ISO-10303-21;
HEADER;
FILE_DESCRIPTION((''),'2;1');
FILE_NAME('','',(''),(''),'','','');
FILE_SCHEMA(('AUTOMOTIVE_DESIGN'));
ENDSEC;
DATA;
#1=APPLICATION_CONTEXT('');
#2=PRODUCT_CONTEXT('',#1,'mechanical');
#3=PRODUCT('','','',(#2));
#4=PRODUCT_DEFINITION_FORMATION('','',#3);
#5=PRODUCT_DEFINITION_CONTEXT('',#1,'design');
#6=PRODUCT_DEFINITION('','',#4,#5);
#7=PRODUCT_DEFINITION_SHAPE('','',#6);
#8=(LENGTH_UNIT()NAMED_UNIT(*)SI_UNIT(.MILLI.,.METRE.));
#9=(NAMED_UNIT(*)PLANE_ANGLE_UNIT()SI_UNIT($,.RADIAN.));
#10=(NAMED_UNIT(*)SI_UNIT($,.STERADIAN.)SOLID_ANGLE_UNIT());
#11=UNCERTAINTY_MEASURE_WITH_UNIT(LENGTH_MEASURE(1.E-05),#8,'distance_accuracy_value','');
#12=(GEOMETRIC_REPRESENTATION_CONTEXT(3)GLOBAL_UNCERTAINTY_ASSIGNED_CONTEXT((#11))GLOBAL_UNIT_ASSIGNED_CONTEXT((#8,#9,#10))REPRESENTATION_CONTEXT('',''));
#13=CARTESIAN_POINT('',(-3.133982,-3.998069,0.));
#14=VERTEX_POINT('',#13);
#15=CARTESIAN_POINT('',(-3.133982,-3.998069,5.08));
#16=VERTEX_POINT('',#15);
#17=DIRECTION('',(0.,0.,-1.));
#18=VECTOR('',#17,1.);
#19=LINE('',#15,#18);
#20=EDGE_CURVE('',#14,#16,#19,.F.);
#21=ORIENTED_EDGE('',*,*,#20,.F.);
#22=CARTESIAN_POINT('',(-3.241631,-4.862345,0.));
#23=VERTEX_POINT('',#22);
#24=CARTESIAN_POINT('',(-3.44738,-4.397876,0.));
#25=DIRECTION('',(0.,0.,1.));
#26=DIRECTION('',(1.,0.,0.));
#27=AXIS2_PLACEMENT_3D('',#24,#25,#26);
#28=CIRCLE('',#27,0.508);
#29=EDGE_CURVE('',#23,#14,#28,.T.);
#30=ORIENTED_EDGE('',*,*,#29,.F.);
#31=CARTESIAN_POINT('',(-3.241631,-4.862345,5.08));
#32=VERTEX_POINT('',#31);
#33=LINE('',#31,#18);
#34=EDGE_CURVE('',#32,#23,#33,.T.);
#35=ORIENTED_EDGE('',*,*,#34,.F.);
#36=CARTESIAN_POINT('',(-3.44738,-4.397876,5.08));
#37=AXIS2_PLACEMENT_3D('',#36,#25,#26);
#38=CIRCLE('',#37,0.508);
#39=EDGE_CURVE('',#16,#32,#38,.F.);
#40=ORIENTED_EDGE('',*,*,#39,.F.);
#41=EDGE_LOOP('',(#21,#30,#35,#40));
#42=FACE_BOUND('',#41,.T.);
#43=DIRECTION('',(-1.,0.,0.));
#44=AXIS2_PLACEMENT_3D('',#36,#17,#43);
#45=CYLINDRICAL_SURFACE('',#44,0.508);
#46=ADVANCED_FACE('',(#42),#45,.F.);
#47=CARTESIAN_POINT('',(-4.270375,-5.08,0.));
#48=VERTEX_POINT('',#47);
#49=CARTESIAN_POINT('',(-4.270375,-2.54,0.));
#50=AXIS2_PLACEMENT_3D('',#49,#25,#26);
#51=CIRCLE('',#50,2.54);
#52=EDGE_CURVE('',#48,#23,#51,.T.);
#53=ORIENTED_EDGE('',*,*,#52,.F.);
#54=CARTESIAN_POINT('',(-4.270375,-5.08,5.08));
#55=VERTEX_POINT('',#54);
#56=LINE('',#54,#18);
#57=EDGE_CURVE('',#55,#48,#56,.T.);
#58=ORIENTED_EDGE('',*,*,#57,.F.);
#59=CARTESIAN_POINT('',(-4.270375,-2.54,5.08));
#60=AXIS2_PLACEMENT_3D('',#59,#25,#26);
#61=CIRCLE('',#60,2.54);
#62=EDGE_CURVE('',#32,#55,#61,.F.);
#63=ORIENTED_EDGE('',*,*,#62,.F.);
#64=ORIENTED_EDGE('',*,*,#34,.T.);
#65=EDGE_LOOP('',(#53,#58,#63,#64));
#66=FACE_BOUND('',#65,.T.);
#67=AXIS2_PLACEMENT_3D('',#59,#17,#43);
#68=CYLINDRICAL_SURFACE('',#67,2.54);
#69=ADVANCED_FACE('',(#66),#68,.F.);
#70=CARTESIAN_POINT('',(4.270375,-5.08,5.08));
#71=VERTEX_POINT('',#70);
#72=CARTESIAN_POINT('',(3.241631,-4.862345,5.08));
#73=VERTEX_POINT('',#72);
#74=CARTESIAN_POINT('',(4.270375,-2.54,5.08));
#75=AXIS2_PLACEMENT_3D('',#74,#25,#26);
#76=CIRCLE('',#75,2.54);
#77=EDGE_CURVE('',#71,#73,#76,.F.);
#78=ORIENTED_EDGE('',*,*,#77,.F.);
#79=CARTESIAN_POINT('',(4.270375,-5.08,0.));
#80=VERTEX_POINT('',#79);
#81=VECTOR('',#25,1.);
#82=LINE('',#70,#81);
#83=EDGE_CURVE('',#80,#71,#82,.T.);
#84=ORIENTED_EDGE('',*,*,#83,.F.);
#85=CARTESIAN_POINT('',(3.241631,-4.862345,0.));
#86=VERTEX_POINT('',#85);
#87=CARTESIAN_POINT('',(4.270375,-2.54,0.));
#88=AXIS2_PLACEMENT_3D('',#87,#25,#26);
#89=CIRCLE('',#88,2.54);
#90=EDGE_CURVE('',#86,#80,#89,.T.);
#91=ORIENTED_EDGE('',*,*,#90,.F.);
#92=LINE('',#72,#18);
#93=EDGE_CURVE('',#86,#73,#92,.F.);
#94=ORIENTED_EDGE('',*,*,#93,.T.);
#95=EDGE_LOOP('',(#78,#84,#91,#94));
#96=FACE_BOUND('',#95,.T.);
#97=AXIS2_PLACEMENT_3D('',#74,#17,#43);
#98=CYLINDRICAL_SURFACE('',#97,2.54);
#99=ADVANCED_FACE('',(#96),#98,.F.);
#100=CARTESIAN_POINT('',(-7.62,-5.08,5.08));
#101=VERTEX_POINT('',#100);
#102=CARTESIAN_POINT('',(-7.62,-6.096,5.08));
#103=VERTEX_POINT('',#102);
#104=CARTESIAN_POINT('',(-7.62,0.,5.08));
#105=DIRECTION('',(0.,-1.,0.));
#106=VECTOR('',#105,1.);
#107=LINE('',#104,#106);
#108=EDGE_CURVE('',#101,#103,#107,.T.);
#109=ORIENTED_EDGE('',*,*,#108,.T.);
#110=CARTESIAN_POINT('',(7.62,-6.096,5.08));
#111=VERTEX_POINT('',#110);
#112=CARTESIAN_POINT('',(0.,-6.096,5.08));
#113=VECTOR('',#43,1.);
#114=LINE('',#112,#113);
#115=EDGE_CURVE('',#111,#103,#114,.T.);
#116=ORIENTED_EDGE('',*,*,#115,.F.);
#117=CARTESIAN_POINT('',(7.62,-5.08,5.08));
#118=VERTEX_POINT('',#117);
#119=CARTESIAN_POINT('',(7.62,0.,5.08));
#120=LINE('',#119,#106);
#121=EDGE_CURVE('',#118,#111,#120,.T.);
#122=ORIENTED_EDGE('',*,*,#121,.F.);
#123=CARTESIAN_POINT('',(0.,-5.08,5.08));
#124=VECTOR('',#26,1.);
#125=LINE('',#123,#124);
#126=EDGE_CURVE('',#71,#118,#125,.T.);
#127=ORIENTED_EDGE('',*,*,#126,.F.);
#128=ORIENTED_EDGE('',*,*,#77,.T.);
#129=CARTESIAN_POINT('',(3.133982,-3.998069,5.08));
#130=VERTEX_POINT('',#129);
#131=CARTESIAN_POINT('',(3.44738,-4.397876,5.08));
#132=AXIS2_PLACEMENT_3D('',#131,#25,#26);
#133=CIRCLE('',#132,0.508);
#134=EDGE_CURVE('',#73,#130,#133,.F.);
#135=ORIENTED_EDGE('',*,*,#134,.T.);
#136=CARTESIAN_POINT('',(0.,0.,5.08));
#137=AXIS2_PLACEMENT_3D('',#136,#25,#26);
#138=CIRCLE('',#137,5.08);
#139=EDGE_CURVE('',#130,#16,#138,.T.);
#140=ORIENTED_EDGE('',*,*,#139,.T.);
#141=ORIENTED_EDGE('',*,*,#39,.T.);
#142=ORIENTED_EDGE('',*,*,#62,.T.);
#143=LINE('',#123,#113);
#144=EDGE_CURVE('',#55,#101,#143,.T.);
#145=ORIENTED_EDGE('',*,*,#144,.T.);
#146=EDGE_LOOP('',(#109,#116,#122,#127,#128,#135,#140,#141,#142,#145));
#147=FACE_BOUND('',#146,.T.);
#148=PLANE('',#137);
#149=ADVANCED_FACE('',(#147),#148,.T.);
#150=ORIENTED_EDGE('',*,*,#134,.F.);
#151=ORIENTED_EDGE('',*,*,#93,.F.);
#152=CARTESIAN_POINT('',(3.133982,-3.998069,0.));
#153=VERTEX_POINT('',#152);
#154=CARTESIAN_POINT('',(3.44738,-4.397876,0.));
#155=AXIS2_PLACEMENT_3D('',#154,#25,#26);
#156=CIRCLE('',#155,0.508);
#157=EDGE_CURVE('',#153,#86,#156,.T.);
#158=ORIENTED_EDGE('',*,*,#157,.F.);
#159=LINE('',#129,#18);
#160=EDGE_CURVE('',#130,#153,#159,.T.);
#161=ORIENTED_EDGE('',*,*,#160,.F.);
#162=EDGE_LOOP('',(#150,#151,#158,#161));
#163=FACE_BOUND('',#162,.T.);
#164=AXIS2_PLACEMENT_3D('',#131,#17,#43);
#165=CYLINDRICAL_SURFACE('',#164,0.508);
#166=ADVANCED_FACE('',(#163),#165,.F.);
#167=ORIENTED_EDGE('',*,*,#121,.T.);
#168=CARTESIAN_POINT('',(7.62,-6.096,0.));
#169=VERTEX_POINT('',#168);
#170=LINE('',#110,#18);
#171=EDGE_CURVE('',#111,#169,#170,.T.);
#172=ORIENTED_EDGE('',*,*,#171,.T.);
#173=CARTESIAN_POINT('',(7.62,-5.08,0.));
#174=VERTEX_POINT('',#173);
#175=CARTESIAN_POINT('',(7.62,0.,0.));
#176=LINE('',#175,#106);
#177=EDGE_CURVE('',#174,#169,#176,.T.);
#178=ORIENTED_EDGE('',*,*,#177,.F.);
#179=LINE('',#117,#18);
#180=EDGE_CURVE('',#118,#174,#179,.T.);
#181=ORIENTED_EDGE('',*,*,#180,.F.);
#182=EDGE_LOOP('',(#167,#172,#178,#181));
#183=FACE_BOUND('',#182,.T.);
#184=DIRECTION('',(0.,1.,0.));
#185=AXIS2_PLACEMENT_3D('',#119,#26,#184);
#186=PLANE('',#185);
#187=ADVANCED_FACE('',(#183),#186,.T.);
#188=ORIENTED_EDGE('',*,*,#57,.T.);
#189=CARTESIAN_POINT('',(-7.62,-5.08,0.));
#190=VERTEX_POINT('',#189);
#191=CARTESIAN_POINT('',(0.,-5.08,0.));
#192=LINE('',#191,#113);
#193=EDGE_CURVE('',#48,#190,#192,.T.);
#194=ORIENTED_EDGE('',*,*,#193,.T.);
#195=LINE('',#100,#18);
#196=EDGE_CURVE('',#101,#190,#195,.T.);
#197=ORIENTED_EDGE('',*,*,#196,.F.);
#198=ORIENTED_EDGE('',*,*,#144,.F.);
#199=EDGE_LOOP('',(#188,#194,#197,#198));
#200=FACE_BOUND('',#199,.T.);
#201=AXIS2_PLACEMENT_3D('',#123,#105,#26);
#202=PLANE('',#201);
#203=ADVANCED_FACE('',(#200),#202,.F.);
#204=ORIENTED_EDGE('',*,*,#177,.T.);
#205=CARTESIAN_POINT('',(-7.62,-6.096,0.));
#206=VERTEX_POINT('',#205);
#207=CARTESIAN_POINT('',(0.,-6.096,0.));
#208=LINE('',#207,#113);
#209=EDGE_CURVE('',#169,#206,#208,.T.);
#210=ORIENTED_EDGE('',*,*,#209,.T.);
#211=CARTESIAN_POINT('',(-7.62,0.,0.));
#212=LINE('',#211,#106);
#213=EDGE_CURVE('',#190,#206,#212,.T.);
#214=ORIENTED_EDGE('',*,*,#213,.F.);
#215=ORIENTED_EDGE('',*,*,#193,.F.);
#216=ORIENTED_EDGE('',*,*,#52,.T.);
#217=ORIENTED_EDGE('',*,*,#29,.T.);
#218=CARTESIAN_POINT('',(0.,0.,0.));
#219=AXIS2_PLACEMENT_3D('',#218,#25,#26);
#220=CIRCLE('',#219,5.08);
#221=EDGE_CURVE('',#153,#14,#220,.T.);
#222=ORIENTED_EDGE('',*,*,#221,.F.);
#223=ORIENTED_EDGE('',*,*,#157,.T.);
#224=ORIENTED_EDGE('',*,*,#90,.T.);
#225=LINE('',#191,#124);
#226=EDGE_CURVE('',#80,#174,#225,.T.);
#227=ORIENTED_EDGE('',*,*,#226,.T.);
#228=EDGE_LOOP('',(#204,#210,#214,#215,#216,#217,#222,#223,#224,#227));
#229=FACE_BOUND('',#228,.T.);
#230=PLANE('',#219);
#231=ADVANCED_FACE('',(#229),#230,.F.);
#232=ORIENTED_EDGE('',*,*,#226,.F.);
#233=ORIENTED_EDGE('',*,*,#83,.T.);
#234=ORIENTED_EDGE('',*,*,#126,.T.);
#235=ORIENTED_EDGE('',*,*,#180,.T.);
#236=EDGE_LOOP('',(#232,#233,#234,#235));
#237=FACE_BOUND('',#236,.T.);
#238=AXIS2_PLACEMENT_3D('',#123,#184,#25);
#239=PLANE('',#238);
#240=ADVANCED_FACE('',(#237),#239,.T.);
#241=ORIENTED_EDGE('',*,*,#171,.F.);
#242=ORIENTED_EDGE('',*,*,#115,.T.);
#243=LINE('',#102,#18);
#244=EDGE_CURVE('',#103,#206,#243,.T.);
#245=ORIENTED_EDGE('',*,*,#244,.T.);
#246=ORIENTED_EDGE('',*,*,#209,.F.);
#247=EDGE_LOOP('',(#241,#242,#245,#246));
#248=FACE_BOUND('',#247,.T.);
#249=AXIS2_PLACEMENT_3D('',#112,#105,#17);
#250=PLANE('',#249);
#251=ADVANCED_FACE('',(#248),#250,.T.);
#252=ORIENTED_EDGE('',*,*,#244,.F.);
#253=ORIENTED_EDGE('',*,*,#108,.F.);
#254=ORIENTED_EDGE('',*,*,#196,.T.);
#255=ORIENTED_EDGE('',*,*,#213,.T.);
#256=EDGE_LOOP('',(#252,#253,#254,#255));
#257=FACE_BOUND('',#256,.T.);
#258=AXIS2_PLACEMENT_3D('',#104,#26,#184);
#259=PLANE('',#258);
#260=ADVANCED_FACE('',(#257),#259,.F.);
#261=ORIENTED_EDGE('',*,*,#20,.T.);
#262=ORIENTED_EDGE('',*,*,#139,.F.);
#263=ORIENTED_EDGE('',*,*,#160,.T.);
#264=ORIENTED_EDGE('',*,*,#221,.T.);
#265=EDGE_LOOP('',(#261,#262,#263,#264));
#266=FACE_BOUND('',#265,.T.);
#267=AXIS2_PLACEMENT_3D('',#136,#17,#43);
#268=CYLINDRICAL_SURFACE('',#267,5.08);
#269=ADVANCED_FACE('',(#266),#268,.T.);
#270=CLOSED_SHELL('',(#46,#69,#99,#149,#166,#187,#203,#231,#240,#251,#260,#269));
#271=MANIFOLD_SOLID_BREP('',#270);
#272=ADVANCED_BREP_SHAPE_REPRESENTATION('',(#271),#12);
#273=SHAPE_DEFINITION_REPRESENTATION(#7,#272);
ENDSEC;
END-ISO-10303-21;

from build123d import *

# Parameters (mm, degrees)
SKETCH1_W           = 2.54
SKETCH1_H           = 1.016
SKETCH1_W_2         = 5.08
BOSS_EXTRUDE1_DEPTH = 5.08
FILLET1_R           = 2.54
FILLET2_R           = 0.508


with BuildPart() as part:
    # Sketch1 → Boss-Extrude1 (new body)
    with BuildSketch(Plane.XY):
        with BuildLine():
            Line((-2.54, -4.399409051), (-2.54, -1.651))
            Line((-2.54, -1.651), (2.54, -1.651))
            Line((2.54, -1.651), (2.54, -4.399409051))
            ThreePointArc((2.54, -4.399409051), (4.399409051, -2.54), (5.08, 0))
            ThreePointArc((5.08, 0), (-2.54, 4.399409051), (-2.54, -4.399409051))
        make_face()
        with BuildLine():
            Line((2.54, -1.651), (-2.54, -1.651))
            Line((-2.54, -1.651), (-2.54, -4.399409051))
            ThreePointArc((-2.54, -4.399409051), (-1.314800749, -4.906903198), (0, -5.08))
            ThreePointArc((0, -5.08), (1.314800749, -4.906903198), (2.54, -4.399409051))
            Line((2.54, -4.399409051), (2.54, -1.651))
        make_face()
        with BuildLine():
            Line((-2.54, -4.399409051), (-2.54, -1.651))
            Line((-2.54, -1.651), (2.54, -1.651))
            Line((2.54, -1.651), (2.54, -4.399409051))
            ThreePointArc((2.54, -4.399409051), (4.399409051, -2.54), (5.08, 0))
            ThreePointArc((5.08, 0), (-2.54, 4.399409051), (-2.54, -4.399409051))
        make_face()
        with BuildLine():
            Line((2.54, -1.651), (-2.54, -1.651))
            Line((-2.54, -1.651), (-2.54, -4.399409051))
            ThreePointArc((-2.54, -4.399409051), (-1.314800749, -4.906903198), (0, -5.08))
            ThreePointArc((0, -5.08), (1.314800749, -4.906903198), (2.54, -4.399409051))
            Line((2.54, -4.399409051), (2.54, -1.651))
        make_face()
        with BuildLine():
            ThreePointArc((0, -5.08), (-1.314800749, -4.906903198), (-2.54, -4.399409051))
            Line((-2.54, -4.399409051), (-2.54, -5.08))
            Line((-2.54, -5.08), (0, -5.08))
        make_face()
        with BuildLine():
            Line((2.54, -5.08), (2.54, -4.399409051))
            ThreePointArc((2.54, -4.399409051), (1.314800749, -4.906903198), (0, -5.08))
            Line((0, -5.08), (2.54, -5.08))
        make_face()
        with Locations((1.27, -5.588)):
            Rectangle(SKETCH1_W, SKETCH1_H)
        with Locations((-5.08, -5.588)):
            Rectangle(SKETCH1_W_2, SKETCH1_H)
        with Locations((5.08, -5.588)):
            Rectangle(SKETCH1_W_2, SKETCH1_H)
        with Locations((-1.27, -5.588)):
            Rectangle(SKETCH1_W, SKETCH1_H)
    extrude(amount=BOSS_EXTRUDE1_DEPTH)

    # Fillet1
    # the kernel refuses this fillet: 2.54 mm, written as the material it adds along each edge
    with BuildSketch(Plane(origin=(-2.54, -5.08, 0), x_dir=(-1, 0, 0), z_dir=(0, 0, 1))) as fillet1_piece_1:
        with BuildLine():
            CenterArc((1.730375098, -2.54), FILLET1_R, 90, 42.941402865)
            Line((0, -0.680590949), (-0.034607502, -0.643402768))
            ThreePointArc((-0.034607502, -0.643402768), (-0.0508, -0.340295474), (-0.0508, 0))
            Line((-0.0508, 0), (0, 0.0508))
            Line((0, 0.0508), (1.730375098, 0.0508))
            Line((1.730375098, 0.0508), (1.730375098, 0))
        make_face()
    extrude(amount=5.08)
    with BuildSketch(Plane(origin=(2.54, -5.08, 0), x_dir=(0, 1, 0), z_dir=(0, 0, 1))) as fillet1_piece_2:
        with BuildLine():
            CenterArc((2.54, -1.730375098), FILLET1_R, 137.058597135, 42.941402865)
            Line((0, -1.730375098), (-0.0508, -1.730375098))
            Line((-0.0508, -1.730375098), (-0.0508, 0))
            Line((-0.0508, 0), (0, 0.0508))
            ThreePointArc((0, 0.0508), (0.340295474, 0.0508), (0.643402768, 0.034607502))
            Line((0.643402768, 0.034607502), (0.680590949, 0))
        make_face()
    extrude(amount=5.08)

    # Fillet2
    fillet2_edges = [part.edges().sort_by_distance(p)[0] for p in [
        (2.54, -4.399409051, 2.54),
        (-2.54, -4.399409051, 2.54),
    ]]
    fillet(fillet2_edges, radius=FILLET2_R)


solid = part.part
